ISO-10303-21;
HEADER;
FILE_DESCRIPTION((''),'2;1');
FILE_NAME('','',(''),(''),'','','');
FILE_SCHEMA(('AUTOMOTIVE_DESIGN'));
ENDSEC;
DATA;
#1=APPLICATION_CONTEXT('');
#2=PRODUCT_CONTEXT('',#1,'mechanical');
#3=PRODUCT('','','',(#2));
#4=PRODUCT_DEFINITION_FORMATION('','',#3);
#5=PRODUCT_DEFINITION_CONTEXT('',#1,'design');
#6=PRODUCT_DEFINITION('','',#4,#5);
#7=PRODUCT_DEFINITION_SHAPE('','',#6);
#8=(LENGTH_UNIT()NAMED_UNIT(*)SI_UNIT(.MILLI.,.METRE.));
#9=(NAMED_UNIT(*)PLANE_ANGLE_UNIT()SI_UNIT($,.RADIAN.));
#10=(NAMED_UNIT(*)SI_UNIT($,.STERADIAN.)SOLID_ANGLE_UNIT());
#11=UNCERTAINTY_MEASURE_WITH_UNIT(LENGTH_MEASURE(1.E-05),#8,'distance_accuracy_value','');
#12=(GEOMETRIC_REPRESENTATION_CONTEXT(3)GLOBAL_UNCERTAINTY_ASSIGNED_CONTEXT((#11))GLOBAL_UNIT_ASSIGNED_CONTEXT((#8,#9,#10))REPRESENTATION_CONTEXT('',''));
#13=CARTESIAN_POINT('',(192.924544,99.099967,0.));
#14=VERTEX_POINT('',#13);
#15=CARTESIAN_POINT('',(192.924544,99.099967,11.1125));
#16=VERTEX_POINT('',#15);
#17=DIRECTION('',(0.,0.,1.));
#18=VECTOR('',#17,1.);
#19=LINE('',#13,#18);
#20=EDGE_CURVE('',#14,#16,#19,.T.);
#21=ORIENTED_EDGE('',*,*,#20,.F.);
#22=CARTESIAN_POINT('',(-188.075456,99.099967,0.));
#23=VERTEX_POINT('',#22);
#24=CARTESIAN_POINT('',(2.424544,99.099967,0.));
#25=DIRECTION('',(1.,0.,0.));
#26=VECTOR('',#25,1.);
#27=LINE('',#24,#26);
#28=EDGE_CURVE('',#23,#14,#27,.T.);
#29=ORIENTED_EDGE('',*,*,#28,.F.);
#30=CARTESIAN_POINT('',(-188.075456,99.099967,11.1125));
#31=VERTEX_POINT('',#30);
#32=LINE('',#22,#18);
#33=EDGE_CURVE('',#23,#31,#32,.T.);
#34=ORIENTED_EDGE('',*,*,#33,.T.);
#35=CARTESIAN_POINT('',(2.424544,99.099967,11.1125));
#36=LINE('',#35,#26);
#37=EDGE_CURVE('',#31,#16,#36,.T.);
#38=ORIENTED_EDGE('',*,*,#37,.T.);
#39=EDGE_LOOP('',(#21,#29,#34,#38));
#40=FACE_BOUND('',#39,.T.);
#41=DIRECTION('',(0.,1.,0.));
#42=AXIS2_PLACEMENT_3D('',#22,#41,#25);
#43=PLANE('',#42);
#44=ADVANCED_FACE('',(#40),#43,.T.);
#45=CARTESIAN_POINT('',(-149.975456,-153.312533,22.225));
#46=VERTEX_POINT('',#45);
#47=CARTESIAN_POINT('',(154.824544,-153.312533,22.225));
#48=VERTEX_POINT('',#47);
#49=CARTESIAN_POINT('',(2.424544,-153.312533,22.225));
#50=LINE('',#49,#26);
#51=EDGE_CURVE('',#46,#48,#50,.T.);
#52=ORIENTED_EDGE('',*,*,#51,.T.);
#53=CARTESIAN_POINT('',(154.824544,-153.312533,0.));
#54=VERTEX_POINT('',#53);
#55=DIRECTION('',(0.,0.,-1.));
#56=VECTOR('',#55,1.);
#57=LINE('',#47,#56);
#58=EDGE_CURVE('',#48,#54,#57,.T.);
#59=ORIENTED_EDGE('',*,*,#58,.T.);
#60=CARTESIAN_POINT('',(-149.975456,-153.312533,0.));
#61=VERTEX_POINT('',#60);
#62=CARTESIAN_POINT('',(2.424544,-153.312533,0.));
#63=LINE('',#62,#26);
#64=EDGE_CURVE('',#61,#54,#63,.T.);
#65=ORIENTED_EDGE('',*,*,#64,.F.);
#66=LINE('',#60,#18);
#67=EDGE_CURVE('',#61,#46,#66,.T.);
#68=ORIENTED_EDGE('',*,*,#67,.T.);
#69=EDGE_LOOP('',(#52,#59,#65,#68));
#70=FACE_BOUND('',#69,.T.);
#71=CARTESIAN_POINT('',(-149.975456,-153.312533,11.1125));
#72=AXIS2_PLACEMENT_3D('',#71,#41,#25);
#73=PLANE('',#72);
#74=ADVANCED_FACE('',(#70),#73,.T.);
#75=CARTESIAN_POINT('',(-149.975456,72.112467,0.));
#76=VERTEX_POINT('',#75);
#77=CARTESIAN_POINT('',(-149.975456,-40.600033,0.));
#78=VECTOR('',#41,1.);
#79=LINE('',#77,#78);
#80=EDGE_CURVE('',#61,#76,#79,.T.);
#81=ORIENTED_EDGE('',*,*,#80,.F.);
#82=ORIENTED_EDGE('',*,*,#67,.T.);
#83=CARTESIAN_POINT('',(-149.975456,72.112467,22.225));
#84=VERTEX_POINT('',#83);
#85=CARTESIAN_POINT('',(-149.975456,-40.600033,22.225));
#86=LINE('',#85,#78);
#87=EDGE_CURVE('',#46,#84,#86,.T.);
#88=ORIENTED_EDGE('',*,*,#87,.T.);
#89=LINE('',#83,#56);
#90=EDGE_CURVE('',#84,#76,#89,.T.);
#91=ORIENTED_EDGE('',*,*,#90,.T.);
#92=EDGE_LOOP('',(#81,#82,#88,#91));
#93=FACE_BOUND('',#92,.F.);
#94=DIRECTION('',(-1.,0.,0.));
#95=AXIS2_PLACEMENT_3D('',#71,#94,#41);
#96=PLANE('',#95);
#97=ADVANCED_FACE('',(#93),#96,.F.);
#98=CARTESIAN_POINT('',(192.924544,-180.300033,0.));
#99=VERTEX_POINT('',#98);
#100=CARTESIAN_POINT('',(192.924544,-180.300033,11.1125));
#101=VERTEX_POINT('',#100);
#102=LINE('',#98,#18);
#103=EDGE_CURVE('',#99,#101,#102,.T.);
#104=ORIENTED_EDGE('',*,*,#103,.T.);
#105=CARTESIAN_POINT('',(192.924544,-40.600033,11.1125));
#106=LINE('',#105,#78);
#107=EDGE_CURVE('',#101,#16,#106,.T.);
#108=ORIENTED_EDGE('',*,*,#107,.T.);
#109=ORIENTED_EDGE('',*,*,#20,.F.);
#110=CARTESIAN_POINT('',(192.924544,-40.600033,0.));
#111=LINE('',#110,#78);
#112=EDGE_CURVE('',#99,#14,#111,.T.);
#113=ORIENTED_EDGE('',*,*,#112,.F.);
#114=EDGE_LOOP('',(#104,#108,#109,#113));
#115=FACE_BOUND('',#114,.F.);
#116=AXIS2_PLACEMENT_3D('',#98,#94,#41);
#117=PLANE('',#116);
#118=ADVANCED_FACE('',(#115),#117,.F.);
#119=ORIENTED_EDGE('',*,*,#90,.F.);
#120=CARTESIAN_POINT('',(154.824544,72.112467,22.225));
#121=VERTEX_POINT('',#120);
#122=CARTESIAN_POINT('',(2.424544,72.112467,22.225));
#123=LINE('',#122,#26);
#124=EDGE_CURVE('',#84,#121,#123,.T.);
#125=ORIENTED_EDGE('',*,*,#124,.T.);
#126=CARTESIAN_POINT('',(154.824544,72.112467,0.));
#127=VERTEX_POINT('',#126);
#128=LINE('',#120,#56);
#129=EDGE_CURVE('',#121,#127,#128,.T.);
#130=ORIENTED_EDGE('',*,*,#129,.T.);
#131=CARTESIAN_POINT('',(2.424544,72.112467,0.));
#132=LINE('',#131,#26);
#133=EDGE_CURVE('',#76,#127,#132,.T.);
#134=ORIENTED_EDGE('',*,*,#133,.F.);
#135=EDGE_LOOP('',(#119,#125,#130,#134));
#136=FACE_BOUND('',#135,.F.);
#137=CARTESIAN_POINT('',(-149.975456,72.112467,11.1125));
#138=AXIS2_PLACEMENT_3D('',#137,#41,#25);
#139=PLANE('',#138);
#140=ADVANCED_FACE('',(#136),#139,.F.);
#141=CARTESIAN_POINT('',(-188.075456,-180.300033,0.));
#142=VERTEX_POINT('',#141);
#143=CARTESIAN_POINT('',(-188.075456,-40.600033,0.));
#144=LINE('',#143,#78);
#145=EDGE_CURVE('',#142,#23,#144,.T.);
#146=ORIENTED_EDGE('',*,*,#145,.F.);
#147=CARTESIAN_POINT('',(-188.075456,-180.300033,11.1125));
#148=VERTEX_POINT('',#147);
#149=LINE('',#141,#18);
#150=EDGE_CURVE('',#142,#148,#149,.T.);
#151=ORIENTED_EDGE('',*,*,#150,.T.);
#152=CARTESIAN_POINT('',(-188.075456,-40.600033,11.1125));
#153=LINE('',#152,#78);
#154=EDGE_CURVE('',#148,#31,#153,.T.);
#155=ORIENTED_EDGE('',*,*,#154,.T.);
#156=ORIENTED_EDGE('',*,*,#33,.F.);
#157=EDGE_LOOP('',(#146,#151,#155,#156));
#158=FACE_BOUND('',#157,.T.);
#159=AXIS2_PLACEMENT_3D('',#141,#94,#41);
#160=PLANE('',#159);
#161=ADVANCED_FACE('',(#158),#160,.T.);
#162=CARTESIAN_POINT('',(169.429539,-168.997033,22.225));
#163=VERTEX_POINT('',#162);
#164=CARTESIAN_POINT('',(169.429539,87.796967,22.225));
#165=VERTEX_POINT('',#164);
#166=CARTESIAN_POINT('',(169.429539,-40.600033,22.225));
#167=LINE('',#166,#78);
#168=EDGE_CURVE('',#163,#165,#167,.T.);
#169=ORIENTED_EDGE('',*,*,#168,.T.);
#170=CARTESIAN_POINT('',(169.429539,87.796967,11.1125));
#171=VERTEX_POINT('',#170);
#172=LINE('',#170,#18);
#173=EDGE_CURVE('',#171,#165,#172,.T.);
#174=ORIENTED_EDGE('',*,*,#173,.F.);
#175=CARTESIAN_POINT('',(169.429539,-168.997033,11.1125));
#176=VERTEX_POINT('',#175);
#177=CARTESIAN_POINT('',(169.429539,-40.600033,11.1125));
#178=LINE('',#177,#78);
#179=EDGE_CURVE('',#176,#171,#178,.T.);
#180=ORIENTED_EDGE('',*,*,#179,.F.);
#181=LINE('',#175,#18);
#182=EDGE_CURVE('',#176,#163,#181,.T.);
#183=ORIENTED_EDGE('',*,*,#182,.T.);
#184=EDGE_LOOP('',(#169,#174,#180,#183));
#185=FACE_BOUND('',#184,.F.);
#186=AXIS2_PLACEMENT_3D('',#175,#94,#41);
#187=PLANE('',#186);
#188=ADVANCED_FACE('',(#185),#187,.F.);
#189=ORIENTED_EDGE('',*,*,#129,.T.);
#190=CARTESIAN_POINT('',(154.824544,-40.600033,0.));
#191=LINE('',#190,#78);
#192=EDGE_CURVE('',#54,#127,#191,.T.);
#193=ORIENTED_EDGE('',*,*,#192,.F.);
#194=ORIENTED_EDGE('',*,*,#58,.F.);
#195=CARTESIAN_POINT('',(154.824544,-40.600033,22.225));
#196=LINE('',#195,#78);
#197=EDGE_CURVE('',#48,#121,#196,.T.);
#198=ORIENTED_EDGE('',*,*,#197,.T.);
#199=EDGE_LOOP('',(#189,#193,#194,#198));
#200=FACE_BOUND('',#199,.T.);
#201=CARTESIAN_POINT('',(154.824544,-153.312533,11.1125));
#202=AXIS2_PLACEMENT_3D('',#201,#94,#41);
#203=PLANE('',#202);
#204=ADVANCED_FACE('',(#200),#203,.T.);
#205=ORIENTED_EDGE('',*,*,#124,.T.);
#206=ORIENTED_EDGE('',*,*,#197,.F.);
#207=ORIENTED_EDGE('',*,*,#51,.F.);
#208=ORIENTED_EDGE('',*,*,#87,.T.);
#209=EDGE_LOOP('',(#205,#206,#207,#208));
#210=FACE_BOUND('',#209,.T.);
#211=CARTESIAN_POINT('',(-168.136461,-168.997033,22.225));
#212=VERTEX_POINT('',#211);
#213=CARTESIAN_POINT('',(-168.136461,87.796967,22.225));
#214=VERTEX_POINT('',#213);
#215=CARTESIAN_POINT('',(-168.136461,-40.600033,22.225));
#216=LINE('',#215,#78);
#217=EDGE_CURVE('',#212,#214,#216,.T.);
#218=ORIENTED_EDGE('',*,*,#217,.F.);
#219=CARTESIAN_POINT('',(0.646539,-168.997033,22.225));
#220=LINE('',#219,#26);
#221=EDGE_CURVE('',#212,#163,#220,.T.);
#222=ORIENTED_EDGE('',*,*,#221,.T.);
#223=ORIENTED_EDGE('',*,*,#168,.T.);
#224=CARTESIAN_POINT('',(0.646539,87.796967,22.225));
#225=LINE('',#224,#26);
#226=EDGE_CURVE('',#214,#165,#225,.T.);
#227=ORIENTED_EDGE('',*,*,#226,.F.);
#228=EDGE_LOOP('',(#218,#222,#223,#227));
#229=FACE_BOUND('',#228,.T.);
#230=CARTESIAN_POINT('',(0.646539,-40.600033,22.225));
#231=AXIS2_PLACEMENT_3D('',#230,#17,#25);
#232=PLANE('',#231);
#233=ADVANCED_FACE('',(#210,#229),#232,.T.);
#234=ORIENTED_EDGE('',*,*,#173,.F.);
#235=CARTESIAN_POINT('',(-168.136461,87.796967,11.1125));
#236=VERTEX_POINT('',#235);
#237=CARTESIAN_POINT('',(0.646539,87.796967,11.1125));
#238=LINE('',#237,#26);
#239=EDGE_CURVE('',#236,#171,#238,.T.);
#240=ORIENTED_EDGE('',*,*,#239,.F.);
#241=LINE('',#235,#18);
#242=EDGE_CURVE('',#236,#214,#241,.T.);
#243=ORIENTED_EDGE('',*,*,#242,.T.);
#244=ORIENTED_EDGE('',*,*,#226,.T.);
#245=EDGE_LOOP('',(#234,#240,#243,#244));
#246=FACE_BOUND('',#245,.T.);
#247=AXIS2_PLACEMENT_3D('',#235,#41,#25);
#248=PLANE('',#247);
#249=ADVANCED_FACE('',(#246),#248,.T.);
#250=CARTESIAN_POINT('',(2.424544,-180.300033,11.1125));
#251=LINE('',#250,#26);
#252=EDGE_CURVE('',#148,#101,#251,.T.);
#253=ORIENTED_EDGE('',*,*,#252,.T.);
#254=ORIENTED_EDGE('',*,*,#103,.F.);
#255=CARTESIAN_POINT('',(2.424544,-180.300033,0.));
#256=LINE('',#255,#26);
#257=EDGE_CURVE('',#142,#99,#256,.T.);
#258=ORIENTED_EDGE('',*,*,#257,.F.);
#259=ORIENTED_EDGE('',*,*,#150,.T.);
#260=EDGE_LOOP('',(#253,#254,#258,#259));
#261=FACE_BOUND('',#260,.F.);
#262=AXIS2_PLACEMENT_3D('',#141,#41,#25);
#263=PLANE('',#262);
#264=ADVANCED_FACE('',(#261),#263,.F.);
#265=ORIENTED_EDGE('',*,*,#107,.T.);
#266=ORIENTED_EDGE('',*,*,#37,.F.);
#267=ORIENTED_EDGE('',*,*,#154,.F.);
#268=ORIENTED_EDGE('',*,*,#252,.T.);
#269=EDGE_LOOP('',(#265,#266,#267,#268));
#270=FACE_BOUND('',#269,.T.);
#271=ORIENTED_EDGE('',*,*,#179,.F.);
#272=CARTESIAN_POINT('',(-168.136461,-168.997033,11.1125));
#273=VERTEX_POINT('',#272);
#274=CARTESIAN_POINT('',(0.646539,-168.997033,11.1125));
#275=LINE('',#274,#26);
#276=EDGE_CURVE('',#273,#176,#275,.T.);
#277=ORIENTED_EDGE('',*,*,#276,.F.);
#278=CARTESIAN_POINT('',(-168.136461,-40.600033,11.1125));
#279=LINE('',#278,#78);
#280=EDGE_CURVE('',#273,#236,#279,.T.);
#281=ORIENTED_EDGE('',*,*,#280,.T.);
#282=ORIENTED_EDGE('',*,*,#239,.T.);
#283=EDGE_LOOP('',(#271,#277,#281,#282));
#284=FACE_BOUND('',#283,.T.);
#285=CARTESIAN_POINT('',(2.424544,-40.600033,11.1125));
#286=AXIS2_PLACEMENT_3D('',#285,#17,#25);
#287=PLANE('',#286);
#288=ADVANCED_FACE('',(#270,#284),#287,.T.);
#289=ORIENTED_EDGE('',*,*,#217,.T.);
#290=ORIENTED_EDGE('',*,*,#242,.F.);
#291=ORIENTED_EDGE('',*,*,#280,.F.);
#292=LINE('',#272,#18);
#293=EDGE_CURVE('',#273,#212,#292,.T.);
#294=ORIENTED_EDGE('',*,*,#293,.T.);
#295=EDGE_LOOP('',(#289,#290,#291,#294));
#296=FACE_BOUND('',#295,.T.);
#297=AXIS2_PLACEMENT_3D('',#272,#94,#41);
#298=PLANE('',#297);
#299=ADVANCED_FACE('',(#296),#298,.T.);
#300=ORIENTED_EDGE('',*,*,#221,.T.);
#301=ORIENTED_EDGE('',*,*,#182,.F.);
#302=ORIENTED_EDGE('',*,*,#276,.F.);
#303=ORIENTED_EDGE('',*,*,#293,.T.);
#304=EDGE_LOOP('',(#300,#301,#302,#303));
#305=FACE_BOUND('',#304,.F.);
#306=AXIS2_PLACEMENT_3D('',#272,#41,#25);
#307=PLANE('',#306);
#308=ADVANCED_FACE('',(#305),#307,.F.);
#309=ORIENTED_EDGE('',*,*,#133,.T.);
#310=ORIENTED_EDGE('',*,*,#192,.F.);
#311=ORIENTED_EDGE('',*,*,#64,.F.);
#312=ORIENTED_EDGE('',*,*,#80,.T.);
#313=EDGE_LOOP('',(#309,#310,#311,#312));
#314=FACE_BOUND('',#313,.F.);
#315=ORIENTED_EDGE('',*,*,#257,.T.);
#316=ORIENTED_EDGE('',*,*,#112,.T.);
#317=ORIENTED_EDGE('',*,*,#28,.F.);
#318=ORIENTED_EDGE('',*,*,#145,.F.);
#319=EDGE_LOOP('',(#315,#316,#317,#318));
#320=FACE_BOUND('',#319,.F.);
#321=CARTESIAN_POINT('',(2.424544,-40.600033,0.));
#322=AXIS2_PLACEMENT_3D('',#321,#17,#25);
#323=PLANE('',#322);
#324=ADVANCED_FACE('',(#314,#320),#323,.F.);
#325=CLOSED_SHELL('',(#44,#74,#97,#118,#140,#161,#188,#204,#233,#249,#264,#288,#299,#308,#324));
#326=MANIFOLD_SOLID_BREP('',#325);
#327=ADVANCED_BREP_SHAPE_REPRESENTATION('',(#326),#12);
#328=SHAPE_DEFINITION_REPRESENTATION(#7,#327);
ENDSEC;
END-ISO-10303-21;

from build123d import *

# Parameters (mm, degrees)
F0_W     = 381
F0_H     = 279.4
F0_W_2   = 304.8
F0_H_2   = 225.425
F1_DEPTH = 11.1125
F2_W     = 337.566
F2_H     = 256.794
F2_W_2   = 304.8
F2_H_2   = 225.425
F3_DEPTH = 11.1125


# Not quite as in the source:
# - a length typed as a fraction of an inch, garbled in the dataset ("3 / 203.2 mm" for 3/8 in), is restored


with BuildPart() as f1:
    # F0 (on Top) → F1 (new body)
    with BuildSketch(Plane.XY):
        with Locations((2.4245437235, -40.6000330182)):
            Rectangle(F0_W, F0_H)
        with Locations((2.4245437235, -40.6000330182)):
            Rectangle(F0_W_2, F0_H_2, mode=Mode.SUBTRACT)
    extrude(amount=F1_DEPTH)

    # F2 (on face) → F3 (join)
    with BuildSketch(Plane.XY.offset(11.1125)):
        with Locations((0.6465390325, -40.6000330182)):
            Rectangle(F2_W, F2_H)
        with Locations((2.4245437235, -40.6000330182)):
            Rectangle(F2_W_2, F2_H_2, mode=Mode.SUBTRACT)
    extrude(amount=F3_DEPTH)


solid = f1.part
